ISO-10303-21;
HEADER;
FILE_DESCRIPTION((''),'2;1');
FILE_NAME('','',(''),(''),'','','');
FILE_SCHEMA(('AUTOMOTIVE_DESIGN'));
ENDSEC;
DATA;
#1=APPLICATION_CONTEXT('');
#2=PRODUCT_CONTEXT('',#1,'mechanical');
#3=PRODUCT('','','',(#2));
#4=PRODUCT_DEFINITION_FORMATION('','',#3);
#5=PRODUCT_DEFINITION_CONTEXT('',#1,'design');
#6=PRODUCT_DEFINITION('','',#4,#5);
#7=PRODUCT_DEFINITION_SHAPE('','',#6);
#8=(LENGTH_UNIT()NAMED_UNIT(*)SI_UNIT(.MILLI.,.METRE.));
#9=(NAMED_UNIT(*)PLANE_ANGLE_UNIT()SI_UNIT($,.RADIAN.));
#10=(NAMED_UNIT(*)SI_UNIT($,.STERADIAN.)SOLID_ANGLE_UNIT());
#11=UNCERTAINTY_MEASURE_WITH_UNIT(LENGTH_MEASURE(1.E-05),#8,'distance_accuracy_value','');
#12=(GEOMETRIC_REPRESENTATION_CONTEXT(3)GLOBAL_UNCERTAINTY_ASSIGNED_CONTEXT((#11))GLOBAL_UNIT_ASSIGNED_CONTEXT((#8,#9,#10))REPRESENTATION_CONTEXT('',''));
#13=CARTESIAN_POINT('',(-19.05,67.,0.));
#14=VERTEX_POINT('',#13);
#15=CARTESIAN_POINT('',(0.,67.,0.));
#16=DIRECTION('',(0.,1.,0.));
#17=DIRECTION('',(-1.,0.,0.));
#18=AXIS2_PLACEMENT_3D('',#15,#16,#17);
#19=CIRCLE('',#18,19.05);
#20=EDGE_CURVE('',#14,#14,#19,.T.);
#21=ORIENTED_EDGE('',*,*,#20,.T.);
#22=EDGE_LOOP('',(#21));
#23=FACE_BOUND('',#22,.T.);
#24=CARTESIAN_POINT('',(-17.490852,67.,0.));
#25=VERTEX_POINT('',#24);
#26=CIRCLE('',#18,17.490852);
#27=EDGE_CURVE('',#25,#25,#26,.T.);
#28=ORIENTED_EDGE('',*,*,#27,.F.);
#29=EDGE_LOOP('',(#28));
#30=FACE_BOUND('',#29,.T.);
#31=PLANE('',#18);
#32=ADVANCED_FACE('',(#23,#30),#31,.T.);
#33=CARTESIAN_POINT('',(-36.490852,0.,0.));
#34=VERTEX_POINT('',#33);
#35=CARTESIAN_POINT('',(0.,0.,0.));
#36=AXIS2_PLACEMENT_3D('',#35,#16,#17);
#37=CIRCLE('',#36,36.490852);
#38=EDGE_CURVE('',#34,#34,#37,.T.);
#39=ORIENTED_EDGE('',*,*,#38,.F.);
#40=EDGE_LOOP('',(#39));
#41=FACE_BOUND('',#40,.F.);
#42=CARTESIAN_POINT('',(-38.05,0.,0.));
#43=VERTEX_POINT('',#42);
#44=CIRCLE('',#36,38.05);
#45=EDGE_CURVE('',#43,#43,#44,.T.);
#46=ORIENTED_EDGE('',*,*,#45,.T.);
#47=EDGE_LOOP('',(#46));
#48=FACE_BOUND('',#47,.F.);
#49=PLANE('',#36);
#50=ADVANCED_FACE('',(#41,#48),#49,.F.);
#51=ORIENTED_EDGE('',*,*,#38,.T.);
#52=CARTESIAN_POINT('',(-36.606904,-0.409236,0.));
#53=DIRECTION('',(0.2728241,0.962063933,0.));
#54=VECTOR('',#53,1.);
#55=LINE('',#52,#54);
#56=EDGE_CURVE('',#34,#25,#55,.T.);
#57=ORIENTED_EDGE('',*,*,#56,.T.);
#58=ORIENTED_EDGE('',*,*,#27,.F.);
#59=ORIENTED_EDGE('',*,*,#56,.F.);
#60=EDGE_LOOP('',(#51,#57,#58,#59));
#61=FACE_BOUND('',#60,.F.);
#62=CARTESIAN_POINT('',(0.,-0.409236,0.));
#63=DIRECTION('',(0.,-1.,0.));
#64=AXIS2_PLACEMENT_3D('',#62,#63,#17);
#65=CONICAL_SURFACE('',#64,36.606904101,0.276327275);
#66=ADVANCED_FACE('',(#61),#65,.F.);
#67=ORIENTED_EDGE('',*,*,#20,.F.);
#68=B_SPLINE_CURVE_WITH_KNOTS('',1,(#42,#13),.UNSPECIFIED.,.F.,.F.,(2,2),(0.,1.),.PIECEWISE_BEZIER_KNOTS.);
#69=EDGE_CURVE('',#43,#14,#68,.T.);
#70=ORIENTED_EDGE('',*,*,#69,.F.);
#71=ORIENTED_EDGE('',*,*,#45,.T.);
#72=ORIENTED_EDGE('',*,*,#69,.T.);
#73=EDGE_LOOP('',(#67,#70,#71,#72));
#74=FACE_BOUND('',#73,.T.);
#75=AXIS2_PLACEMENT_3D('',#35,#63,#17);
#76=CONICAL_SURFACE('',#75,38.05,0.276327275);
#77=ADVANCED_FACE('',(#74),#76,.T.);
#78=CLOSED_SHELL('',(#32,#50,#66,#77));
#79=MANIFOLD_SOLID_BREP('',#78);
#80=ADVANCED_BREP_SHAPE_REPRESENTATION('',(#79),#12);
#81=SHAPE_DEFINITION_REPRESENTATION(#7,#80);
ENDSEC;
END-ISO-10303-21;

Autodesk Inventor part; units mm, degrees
ref_plane "YZ Plane" through (0, 0, 0) normal (1, 0, 0) x (0, 1, 0)
ref_plane "XY Plane" through (0, 0, 0) normal (0, 0, 1) x (1, 0, 0)
sketch "Szkic6" plane through (0, 0, 0) normal (0, 1, 0) x (-1, 0, 0)
  circle A0 centre (0, 0) radius 38.05
  dimension "d33" = 76.1
ref_plane "Płaszczyzna konstrukcyjna1" through (0, 67, 0) normal (0, 1, 0) x (-1, 0, 0)
sketch "Szkic7" plane through (0, 67, 0) normal (0, 1, 0) x (-1, 0, 0)
  circle A0 centre (0, 0) radius 19.05
  dimension "d35" = 38.1
loft "Wyciągnięcie złożone1" add profiles "Szkic6", "Szkic7"
shell "Skorupa1" thickness 1.5 removed faces 2 at (5.6226, 67, 0.0883) at (-5.8996, 0, 7.9079)
equation "\"d33\" = OD1"
equation "\"d35\" = OD2"
equation "\"d52\" = THK"
equation "\"SzerokośćGięciaPodcięcia\" = Grubość"
equation "\"RozmiarPodcięciaNarożnika\" = 4 * Grubość"
equation "\"PromieńPrzejścia\" = PromieńGięcia"
equation "\"Rozmiar_promienia_Jacobiego\" = PromieńGięcia"
equation "\"Wielk_odstępu\" = Grubość"
equation "\"d2\" = PromieńGięcia"
equation "\"d23\" = PromieńGięcia"
equation "\"OD1\" = 76.1"
equation "\"OD2\" = 38.1"
equation "\"L\" = 67"
equation "\"THK\" = 1.5"
equation "\"d34\" = L"
equation "\"Grubość\" = 1.5"
equation "\"PromieńGięcia\" = 3"
properties part number "Redukcja symetryczna Ø76,1x38,1x1,5 L=67" material "304"
